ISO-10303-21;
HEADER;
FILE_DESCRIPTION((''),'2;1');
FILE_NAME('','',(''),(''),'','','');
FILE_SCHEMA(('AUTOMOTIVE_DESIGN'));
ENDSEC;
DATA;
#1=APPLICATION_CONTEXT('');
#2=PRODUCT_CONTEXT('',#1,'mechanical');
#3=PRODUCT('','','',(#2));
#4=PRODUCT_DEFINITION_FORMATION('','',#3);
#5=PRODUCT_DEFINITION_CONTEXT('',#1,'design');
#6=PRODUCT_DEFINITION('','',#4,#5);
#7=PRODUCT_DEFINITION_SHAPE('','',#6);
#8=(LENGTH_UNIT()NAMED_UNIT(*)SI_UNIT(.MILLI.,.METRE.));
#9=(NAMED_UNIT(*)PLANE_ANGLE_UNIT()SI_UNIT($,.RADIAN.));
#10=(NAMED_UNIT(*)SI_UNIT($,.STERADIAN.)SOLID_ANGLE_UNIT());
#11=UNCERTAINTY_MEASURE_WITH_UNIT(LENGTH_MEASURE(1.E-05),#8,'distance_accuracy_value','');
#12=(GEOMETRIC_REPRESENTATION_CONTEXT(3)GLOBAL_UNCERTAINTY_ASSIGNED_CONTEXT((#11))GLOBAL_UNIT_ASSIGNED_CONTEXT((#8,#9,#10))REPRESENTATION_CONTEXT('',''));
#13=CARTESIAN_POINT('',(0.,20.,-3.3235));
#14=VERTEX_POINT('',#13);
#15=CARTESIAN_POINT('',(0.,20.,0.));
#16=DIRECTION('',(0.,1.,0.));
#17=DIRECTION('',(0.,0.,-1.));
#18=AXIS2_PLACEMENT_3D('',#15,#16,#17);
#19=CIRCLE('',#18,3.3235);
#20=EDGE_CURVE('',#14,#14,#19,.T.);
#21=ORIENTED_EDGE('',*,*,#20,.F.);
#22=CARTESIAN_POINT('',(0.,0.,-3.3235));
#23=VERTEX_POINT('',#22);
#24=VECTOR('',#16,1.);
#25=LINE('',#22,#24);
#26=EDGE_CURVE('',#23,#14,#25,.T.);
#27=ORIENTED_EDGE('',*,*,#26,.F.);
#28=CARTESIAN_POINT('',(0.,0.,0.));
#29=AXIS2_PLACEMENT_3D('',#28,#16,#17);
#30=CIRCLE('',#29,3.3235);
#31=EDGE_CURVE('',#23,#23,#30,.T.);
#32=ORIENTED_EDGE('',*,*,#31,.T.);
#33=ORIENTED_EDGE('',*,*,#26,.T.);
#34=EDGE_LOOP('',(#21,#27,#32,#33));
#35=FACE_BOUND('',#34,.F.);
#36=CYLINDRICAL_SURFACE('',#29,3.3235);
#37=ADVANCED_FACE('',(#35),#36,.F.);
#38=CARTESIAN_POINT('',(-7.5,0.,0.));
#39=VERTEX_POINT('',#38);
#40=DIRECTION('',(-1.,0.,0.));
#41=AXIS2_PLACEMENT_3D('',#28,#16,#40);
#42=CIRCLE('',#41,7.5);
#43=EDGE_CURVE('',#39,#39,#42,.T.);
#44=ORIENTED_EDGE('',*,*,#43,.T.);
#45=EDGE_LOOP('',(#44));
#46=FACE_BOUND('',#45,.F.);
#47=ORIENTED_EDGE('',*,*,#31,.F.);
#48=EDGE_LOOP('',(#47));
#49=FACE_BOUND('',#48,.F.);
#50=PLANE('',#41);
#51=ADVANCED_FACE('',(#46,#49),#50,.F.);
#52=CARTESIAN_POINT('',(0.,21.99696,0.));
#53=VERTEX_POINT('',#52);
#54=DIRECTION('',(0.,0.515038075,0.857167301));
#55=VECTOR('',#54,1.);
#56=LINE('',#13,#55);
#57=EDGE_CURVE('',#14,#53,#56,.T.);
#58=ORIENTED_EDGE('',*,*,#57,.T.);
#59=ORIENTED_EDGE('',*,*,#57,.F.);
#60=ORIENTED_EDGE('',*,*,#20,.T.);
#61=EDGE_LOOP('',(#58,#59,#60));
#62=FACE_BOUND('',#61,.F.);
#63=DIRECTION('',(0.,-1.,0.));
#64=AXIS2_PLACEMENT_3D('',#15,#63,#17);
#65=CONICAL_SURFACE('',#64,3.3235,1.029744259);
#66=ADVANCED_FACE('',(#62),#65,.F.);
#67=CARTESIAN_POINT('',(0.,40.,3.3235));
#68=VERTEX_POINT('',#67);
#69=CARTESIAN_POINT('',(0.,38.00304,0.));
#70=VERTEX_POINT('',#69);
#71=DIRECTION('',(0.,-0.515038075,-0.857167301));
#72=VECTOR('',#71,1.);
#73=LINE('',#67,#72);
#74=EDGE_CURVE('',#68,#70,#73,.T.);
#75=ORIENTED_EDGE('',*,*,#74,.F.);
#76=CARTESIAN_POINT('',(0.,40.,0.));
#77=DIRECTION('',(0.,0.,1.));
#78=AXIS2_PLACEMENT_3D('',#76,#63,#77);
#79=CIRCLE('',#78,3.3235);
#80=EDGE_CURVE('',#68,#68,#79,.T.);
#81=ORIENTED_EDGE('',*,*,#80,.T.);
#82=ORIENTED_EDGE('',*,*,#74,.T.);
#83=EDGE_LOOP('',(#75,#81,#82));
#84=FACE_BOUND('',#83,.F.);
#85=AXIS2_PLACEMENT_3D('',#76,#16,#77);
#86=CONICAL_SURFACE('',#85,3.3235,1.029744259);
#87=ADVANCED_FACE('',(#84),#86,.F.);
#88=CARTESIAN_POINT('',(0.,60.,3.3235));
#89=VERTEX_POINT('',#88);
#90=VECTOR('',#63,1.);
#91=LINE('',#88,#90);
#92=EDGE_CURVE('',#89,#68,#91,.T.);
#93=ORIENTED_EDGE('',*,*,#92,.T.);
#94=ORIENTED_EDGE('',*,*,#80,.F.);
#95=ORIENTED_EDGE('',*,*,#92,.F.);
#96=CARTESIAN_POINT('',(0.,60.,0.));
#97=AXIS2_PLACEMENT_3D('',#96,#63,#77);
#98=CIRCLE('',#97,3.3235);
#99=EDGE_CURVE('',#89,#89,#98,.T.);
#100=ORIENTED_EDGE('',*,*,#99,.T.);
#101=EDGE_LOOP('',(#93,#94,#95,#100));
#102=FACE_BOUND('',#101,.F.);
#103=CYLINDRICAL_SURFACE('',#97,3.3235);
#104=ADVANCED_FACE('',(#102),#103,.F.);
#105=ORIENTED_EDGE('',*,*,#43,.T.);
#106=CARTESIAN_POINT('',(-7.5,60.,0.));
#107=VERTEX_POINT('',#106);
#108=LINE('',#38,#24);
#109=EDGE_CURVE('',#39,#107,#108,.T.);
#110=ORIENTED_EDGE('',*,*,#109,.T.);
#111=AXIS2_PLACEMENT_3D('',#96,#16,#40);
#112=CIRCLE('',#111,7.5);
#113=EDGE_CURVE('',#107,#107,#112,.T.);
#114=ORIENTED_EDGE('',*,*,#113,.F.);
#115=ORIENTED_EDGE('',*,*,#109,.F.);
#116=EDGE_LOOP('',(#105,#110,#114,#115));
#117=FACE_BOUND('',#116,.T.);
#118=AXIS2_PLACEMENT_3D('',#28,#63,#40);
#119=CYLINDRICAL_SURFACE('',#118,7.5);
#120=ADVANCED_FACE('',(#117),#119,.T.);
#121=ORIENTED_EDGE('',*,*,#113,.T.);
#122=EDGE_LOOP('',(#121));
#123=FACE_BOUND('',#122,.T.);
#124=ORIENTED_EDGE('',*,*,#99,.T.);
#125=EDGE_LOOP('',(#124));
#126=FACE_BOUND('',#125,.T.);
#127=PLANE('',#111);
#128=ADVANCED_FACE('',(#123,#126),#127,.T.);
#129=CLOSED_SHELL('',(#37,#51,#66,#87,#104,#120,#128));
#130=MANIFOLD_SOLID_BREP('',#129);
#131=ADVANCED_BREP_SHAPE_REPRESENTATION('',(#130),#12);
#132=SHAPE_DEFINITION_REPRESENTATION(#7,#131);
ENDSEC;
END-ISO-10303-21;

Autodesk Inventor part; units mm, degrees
ref_plane "YZ Plane" through (0, 0, 0) normal (1, 0, 0) x (0, 1, 0)
ref_plane "XZ Plane" through (0, 0, 0) normal (0, 1, 0) x (-1, 0, 0)
ref_plane "XY Plane" through (0, 0, 0) normal (0, 0, 1) x (1, 0, 0)
sketch "Sketch1" plane through (0, 0, 0) normal (0, 1, 0) x (-1, 0, 0)
  circle A0 centre (0, 0) radius 7.5
  dimension "d0" = 15
extrude "Extrusion1" add sketch "Sketch1" along normal blind 60
sketch "Sketch2" plane through (0, 60, 0) normal (0, 1, 0) x (1, 0, 0)
  circle A0 centre (0, 0) radius 7.5 projected
sketch "Sketch3" plane through (0, 0, 0) normal (0, -1, 0) x (1, 0, 0)
  point P0 (0, 0)
  point P1 (0, 0)
hole "Hole1" at (0, 60, 0) direction (0, -1, 0) diameter 6.647 depth 20 tip angle 118 thread size "M8x1.25" class "6H" standard "ISO Metric profile"
hole "Hole2" at (0, 0, 0) direction (0, 1, 0) diameter 6.647 depth 20 tip angle 118 thread size "M8x1.25" class "6H" standard "ISO Metric profile"
properties part number "Support_bar"
